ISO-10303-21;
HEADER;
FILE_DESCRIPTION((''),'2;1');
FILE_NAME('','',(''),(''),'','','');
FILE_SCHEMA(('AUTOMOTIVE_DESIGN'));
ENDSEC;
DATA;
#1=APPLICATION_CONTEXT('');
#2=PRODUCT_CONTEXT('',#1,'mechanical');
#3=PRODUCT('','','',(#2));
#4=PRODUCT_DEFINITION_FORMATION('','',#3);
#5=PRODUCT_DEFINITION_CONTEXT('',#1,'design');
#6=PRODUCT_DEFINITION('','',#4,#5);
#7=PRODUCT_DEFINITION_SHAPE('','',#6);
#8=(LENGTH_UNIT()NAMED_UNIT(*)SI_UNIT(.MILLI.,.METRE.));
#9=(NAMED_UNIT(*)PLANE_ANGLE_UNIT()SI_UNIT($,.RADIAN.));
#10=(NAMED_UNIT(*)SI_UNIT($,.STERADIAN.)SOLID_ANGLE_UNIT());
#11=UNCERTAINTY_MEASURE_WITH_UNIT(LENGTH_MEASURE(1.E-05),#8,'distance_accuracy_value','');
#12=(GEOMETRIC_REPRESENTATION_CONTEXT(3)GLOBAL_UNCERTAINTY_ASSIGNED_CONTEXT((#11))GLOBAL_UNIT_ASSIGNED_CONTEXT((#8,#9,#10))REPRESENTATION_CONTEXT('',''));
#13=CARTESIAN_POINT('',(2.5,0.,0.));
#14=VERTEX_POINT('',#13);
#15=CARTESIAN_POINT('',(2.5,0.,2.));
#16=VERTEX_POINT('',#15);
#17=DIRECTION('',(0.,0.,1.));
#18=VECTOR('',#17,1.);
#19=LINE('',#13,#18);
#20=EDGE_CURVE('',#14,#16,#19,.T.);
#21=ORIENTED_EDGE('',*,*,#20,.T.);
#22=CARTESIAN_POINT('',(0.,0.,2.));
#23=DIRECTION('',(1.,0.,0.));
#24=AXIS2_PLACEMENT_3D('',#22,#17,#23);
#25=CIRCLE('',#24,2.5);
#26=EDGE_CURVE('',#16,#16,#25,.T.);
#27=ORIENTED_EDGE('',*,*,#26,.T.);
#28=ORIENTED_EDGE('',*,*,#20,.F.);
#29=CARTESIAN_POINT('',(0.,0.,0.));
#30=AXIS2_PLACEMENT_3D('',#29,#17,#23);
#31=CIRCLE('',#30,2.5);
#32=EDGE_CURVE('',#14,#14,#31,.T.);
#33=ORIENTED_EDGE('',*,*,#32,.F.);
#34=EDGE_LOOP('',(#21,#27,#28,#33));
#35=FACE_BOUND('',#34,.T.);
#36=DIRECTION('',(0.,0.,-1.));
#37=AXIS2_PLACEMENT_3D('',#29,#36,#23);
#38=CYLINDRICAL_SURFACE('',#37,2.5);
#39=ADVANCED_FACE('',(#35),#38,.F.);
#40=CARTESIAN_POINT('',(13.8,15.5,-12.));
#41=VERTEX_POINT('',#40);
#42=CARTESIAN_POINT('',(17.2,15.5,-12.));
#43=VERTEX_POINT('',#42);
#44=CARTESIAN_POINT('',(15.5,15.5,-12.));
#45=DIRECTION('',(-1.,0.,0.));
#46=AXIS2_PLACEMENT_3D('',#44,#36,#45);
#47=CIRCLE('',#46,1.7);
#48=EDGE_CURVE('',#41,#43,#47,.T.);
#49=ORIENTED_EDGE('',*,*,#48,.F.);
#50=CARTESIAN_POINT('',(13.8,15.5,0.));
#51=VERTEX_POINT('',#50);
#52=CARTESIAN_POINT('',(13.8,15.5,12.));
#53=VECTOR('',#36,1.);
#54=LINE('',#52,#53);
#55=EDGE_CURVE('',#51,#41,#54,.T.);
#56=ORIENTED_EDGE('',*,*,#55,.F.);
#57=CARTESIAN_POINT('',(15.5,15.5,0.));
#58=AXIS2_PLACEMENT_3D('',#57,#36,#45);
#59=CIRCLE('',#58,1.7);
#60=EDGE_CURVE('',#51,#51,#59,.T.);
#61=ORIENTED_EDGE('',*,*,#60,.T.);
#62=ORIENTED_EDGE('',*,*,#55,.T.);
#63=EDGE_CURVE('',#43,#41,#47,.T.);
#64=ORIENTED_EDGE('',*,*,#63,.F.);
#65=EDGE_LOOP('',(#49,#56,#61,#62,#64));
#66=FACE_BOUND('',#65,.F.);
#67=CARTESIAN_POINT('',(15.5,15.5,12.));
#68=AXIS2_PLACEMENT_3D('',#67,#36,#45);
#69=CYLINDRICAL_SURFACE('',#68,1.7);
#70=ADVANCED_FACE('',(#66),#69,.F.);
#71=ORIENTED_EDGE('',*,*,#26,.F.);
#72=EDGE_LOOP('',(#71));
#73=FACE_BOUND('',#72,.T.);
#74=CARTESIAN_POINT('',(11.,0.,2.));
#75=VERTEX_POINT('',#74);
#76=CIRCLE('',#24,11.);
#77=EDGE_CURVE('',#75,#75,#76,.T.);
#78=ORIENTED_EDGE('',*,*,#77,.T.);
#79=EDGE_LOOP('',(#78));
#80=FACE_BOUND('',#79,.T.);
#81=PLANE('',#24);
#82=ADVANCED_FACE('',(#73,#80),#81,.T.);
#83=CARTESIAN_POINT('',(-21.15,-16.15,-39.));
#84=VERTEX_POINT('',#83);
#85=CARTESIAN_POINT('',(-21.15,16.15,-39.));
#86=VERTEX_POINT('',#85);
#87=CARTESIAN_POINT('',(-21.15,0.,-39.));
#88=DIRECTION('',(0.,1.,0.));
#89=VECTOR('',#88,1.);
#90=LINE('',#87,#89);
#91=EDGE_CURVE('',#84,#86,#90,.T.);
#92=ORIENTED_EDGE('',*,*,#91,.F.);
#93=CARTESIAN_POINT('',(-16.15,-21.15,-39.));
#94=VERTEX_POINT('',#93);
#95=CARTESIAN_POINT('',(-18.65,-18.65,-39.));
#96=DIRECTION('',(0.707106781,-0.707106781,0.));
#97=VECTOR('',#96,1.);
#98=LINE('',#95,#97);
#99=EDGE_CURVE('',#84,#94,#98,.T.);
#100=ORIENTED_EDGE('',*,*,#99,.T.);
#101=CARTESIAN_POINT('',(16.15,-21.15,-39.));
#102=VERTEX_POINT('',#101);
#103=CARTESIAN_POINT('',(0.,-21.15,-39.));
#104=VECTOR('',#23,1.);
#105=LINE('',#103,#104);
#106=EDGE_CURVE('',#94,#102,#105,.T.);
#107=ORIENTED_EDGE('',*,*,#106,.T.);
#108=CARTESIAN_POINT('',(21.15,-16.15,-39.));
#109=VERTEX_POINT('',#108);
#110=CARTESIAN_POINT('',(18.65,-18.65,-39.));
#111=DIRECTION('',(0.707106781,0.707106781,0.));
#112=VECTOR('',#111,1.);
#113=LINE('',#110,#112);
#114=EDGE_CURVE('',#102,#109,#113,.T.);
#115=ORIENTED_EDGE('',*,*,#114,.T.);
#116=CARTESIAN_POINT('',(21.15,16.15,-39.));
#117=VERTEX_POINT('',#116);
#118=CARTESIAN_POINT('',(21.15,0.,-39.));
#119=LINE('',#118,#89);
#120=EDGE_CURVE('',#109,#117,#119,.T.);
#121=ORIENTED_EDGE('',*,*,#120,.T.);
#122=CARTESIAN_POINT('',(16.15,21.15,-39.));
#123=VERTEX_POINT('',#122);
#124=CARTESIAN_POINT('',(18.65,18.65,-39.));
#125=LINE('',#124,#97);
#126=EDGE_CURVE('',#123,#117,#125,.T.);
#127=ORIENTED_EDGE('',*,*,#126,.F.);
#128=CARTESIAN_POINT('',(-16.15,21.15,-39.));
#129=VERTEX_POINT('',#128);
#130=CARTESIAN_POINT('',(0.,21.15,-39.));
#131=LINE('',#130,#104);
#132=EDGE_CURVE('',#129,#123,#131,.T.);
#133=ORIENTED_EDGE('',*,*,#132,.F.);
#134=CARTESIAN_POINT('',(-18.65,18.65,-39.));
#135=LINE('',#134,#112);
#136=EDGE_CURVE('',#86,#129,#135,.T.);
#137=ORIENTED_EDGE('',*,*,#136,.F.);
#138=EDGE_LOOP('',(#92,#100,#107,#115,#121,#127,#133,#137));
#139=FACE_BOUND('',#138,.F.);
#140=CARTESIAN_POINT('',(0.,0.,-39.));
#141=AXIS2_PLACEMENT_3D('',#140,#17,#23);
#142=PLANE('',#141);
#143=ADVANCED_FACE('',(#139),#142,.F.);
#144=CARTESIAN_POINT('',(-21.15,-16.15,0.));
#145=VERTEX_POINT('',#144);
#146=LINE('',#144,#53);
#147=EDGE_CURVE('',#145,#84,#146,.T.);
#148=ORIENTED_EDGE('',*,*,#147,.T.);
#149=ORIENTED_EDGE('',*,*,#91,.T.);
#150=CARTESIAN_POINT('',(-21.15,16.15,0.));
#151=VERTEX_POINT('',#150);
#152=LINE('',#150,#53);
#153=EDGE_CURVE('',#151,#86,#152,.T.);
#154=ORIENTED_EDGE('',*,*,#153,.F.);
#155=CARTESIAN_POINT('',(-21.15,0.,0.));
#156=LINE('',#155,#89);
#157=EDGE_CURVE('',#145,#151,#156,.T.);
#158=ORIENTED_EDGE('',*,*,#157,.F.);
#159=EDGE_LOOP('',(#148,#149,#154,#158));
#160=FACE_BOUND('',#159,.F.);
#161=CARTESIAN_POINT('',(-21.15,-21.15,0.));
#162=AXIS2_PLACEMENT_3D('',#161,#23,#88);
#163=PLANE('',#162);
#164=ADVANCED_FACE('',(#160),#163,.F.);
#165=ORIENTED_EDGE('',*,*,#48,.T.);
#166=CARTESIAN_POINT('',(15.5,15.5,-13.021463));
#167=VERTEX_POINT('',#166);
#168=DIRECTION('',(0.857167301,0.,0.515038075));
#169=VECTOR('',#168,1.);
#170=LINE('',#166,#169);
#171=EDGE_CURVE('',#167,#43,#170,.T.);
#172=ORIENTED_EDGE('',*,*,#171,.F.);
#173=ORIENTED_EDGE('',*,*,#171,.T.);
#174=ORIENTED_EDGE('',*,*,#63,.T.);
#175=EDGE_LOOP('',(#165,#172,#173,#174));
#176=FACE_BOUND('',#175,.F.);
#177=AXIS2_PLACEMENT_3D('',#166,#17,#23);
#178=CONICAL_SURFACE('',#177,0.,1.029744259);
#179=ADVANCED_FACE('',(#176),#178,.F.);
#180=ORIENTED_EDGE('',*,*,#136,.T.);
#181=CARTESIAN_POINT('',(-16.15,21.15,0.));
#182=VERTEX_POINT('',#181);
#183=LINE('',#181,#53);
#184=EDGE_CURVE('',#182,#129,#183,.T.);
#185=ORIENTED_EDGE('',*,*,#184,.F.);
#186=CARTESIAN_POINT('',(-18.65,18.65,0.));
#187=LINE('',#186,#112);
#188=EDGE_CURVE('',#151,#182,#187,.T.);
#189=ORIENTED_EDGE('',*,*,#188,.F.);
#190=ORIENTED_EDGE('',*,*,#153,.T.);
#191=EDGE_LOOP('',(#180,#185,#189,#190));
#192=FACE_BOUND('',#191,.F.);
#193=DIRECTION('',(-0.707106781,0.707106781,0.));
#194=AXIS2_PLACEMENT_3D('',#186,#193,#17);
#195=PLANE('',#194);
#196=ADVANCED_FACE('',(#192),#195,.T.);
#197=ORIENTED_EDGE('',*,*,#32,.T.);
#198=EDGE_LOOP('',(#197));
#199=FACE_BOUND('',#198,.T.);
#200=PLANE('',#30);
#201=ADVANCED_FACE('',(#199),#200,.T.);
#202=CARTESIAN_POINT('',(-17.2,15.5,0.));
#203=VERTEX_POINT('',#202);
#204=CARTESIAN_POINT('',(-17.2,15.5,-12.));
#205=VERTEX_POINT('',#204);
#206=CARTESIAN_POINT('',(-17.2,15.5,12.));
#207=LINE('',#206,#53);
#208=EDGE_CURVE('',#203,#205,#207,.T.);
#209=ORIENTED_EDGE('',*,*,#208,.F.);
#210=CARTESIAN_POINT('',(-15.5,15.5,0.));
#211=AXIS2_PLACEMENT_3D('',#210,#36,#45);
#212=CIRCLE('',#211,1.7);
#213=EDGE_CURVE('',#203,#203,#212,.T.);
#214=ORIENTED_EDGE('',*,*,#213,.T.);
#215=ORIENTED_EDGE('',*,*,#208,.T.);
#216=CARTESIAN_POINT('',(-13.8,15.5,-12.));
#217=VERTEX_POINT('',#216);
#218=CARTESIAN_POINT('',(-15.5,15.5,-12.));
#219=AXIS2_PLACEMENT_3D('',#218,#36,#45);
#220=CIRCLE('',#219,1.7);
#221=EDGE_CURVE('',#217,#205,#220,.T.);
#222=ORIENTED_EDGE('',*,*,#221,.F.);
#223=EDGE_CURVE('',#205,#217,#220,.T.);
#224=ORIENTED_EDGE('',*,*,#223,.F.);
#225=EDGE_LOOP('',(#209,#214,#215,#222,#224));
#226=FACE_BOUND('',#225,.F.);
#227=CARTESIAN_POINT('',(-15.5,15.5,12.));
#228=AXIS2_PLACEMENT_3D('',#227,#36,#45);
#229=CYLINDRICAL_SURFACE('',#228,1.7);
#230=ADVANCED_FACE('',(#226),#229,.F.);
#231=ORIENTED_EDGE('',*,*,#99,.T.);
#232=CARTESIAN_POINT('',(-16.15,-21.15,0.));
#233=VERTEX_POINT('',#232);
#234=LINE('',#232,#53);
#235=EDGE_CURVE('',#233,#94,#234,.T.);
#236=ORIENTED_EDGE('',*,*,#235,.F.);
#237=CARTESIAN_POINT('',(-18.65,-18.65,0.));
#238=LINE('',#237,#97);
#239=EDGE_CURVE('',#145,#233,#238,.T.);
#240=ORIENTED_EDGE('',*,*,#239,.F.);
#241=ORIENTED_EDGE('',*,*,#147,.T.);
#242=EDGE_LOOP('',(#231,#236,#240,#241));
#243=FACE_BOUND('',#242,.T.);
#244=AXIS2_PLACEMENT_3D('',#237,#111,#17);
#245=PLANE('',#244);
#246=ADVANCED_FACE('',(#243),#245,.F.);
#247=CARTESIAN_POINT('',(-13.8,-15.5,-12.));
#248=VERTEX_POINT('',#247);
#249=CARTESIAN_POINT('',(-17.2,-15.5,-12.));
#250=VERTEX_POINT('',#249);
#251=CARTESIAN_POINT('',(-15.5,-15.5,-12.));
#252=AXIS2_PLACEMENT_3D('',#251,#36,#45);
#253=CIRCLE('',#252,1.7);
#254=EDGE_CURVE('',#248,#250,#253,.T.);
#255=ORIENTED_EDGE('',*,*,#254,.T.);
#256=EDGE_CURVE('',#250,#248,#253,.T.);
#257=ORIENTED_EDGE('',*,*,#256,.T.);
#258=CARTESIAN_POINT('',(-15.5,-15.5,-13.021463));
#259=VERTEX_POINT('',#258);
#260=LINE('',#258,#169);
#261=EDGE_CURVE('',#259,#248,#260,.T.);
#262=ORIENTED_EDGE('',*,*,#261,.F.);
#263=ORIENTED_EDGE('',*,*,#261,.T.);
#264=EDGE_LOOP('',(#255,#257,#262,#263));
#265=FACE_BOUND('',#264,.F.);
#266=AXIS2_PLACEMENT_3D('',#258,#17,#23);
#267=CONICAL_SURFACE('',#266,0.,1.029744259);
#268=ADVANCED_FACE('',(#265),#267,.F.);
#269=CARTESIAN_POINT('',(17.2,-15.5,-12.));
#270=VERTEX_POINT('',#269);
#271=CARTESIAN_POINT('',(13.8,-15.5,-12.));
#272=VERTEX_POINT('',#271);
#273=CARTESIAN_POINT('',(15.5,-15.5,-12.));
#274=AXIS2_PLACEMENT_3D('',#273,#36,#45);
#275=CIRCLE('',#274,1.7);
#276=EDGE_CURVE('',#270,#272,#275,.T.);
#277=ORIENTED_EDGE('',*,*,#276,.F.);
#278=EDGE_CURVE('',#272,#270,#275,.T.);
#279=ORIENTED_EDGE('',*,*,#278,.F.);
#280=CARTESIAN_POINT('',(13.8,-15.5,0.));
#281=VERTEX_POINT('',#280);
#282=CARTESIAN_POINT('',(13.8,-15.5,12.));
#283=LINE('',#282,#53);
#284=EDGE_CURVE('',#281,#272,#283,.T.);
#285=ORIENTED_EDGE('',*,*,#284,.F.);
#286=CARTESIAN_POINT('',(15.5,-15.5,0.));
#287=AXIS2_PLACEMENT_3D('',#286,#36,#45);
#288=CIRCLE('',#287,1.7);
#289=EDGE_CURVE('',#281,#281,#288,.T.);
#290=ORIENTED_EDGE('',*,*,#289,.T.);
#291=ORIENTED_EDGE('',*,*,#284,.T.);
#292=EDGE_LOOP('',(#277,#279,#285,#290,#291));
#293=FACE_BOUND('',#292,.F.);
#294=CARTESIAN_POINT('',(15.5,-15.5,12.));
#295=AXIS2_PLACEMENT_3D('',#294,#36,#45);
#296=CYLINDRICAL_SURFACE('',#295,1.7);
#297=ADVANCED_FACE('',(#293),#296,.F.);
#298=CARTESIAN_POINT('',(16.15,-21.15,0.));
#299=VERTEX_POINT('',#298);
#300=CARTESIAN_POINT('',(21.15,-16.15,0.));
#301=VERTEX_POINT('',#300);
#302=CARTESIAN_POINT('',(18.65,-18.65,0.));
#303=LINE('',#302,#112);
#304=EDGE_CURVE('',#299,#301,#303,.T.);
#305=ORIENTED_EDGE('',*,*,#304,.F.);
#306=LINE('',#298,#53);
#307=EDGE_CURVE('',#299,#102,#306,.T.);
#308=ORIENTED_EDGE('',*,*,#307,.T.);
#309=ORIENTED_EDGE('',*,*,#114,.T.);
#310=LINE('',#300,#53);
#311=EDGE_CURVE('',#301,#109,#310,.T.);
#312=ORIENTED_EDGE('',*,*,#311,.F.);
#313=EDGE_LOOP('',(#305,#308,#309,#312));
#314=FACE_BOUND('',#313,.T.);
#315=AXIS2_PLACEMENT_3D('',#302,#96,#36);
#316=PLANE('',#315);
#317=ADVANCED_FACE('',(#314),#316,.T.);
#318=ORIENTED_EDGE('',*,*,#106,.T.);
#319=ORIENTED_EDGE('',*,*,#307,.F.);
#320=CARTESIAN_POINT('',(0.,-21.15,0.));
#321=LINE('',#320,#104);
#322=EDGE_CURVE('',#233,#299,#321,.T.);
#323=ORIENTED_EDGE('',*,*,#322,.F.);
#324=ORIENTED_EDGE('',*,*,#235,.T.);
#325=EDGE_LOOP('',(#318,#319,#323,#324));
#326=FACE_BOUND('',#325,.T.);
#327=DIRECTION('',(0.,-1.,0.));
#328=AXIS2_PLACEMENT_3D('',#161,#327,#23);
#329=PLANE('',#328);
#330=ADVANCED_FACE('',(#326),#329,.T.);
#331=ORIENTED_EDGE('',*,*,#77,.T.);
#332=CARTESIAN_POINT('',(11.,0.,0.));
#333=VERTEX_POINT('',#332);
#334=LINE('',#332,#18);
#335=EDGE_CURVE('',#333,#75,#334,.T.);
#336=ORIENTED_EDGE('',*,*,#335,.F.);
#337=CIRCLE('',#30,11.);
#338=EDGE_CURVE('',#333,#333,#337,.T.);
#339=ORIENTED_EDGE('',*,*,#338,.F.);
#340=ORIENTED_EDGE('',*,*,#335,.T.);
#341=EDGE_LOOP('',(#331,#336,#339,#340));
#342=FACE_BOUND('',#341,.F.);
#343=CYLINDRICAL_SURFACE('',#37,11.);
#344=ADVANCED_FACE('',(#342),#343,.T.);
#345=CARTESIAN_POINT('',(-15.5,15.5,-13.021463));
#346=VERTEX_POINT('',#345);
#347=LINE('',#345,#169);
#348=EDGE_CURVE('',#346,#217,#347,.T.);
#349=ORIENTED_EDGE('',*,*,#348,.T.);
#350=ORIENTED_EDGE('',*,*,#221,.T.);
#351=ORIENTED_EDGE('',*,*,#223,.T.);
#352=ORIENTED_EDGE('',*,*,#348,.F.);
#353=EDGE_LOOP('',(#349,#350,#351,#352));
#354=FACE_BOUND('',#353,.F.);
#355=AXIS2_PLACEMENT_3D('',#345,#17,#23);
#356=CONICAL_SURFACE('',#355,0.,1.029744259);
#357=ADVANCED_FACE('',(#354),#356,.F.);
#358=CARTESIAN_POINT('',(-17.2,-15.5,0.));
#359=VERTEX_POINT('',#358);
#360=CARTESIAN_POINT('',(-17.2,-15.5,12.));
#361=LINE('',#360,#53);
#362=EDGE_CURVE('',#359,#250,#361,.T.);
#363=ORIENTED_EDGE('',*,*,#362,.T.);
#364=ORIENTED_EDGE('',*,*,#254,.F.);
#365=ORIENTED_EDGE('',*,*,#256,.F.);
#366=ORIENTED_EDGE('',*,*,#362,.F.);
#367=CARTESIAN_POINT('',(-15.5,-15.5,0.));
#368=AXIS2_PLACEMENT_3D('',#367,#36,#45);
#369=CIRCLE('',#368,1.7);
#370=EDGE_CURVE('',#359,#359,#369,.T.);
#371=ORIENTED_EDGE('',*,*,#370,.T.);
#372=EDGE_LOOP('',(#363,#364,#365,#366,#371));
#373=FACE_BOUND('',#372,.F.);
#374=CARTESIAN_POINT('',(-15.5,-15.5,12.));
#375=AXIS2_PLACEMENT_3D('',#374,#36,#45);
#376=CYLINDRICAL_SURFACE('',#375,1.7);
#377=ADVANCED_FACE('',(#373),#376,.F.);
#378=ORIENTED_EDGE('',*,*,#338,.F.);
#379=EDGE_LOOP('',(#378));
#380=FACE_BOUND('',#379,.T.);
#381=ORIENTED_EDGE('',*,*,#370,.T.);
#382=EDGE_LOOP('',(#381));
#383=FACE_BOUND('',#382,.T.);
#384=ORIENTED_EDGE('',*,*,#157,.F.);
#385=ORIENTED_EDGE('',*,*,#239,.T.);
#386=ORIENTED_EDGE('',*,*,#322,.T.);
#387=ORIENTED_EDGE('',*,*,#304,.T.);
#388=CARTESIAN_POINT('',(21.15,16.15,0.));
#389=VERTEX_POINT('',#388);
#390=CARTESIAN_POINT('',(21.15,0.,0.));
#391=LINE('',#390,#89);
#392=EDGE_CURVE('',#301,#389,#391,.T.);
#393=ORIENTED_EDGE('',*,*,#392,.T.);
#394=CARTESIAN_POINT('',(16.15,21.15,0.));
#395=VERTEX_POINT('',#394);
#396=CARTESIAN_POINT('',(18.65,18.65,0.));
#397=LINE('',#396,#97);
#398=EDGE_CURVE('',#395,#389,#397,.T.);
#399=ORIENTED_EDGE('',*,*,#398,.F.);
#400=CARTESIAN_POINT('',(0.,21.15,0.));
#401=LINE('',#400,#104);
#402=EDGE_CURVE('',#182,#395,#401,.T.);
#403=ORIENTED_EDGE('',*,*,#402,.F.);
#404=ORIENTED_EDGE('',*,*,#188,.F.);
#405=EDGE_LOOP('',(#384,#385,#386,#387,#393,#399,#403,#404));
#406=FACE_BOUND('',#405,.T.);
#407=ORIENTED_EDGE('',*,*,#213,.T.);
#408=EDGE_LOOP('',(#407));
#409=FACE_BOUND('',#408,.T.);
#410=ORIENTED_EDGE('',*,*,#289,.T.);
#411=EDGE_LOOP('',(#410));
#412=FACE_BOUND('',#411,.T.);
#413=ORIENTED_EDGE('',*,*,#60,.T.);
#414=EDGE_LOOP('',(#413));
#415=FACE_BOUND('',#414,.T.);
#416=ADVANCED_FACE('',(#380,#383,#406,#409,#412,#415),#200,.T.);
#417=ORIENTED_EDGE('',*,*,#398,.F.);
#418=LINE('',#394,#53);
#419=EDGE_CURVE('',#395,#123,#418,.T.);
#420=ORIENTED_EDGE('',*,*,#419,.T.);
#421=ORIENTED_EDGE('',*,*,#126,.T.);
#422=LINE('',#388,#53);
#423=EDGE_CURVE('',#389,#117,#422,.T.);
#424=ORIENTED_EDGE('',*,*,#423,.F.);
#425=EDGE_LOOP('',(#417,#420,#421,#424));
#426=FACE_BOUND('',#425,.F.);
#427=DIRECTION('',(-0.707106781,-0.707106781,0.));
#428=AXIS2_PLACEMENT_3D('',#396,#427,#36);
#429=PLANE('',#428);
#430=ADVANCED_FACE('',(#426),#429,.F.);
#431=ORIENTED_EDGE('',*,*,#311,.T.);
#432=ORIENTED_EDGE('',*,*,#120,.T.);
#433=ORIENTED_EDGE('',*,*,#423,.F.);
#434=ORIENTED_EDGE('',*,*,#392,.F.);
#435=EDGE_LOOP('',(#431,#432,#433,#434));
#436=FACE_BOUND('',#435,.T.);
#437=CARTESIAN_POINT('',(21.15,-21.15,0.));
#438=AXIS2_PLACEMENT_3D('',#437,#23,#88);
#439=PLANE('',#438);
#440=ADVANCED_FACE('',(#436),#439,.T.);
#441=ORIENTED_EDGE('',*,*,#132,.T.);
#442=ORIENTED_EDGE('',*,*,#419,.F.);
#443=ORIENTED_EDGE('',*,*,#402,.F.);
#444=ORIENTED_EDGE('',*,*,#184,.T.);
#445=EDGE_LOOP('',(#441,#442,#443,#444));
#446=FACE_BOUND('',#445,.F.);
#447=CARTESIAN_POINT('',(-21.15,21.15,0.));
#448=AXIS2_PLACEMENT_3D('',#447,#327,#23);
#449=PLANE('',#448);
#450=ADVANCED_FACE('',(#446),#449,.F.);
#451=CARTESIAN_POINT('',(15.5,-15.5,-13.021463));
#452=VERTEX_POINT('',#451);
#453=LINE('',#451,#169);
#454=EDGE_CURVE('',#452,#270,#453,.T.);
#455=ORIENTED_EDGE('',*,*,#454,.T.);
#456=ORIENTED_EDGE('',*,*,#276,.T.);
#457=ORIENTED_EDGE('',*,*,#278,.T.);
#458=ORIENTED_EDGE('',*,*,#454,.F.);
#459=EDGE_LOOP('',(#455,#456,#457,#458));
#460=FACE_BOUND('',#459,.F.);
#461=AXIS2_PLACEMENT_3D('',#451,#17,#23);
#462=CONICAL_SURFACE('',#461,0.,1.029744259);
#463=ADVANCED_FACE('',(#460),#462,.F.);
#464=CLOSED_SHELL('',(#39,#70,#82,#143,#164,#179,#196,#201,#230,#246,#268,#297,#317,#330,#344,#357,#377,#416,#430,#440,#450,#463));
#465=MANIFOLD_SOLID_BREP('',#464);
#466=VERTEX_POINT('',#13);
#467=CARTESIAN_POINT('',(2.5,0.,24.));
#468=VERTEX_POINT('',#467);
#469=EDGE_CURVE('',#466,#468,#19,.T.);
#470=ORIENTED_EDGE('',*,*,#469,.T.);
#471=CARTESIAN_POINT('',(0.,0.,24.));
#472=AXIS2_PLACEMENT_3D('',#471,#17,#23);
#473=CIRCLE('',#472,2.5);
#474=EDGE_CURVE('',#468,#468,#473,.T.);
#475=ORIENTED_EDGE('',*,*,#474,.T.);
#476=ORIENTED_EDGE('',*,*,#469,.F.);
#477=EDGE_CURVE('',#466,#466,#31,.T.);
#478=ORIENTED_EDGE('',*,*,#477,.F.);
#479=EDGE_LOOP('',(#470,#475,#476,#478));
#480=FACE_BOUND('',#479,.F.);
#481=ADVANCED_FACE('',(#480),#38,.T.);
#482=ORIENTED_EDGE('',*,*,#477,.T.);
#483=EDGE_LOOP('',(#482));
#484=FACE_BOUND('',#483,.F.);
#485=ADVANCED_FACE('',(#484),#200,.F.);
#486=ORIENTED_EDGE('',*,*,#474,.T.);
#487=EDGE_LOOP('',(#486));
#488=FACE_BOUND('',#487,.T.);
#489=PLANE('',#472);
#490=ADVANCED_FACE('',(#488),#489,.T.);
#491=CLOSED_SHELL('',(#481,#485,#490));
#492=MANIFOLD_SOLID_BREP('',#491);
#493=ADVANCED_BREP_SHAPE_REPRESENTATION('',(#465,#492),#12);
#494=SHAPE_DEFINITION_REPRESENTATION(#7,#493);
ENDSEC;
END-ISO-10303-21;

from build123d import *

# Parameters (mm, degrees)
F0_W     = 42.3
F0_H     = 42.3
F1_DEPTH = 39
F2_R     = 2.5
F3_DEPTH = 24
F2_R_2   = 11
F4_DEPTH = 2
F5_D     = 3.4
F5_DEPTH = 12
F5_TIP   = 1.0214630523
F6_SIZE  = 5


with BuildPart() as f1:
    # F0 (on Top) → F1 (new body)
    with BuildSketch(Plane.XY):
        Rectangle(F0_W, F0_H)
    extrude(amount=-F1_DEPTH)

    # F2 (on face) → F4 (join)
    with BuildSketch(Plane.XY):
        Circle(F2_R_2)
        Circle(F2_R, mode=Mode.SUBTRACT)
    extrude(amount=F4_DEPTH)

    # F5
    with Locations(Plane.XY):
        with Locations((15.5, -15.5), (15.5, 15.5), (-15.5, -15.5), (-15.5, 15.5)):
            Hole(F5_D / 2, depth=F5_DEPTH)
            with Locations((0, 0, -(F5_DEPTH + F5_TIP / 2))):  # 118° drill point
                Cone(0, F5_D / 2, F5_TIP, mode=Mode.SUBTRACT)

    # F6
    f6_edges = [f1.edges().sort_by_distance(p)[0] for p in [
        (-21.15, -21.15, -19.5),
        (21.15, 21.15, -19.5),
        (21.15, -21.15, -19.5),
        (-21.15, 21.15, -19.5),
    ]]
    chamfer(f6_edges, length=F6_SIZE)


with BuildPart() as f3:
    # F2 (on face) → F3 (new body)
    with BuildSketch(Plane.XY):
        Circle(F2_R)
    extrude(amount=F3_DEPTH)


solid = Compound([f1.part, f3.part])
